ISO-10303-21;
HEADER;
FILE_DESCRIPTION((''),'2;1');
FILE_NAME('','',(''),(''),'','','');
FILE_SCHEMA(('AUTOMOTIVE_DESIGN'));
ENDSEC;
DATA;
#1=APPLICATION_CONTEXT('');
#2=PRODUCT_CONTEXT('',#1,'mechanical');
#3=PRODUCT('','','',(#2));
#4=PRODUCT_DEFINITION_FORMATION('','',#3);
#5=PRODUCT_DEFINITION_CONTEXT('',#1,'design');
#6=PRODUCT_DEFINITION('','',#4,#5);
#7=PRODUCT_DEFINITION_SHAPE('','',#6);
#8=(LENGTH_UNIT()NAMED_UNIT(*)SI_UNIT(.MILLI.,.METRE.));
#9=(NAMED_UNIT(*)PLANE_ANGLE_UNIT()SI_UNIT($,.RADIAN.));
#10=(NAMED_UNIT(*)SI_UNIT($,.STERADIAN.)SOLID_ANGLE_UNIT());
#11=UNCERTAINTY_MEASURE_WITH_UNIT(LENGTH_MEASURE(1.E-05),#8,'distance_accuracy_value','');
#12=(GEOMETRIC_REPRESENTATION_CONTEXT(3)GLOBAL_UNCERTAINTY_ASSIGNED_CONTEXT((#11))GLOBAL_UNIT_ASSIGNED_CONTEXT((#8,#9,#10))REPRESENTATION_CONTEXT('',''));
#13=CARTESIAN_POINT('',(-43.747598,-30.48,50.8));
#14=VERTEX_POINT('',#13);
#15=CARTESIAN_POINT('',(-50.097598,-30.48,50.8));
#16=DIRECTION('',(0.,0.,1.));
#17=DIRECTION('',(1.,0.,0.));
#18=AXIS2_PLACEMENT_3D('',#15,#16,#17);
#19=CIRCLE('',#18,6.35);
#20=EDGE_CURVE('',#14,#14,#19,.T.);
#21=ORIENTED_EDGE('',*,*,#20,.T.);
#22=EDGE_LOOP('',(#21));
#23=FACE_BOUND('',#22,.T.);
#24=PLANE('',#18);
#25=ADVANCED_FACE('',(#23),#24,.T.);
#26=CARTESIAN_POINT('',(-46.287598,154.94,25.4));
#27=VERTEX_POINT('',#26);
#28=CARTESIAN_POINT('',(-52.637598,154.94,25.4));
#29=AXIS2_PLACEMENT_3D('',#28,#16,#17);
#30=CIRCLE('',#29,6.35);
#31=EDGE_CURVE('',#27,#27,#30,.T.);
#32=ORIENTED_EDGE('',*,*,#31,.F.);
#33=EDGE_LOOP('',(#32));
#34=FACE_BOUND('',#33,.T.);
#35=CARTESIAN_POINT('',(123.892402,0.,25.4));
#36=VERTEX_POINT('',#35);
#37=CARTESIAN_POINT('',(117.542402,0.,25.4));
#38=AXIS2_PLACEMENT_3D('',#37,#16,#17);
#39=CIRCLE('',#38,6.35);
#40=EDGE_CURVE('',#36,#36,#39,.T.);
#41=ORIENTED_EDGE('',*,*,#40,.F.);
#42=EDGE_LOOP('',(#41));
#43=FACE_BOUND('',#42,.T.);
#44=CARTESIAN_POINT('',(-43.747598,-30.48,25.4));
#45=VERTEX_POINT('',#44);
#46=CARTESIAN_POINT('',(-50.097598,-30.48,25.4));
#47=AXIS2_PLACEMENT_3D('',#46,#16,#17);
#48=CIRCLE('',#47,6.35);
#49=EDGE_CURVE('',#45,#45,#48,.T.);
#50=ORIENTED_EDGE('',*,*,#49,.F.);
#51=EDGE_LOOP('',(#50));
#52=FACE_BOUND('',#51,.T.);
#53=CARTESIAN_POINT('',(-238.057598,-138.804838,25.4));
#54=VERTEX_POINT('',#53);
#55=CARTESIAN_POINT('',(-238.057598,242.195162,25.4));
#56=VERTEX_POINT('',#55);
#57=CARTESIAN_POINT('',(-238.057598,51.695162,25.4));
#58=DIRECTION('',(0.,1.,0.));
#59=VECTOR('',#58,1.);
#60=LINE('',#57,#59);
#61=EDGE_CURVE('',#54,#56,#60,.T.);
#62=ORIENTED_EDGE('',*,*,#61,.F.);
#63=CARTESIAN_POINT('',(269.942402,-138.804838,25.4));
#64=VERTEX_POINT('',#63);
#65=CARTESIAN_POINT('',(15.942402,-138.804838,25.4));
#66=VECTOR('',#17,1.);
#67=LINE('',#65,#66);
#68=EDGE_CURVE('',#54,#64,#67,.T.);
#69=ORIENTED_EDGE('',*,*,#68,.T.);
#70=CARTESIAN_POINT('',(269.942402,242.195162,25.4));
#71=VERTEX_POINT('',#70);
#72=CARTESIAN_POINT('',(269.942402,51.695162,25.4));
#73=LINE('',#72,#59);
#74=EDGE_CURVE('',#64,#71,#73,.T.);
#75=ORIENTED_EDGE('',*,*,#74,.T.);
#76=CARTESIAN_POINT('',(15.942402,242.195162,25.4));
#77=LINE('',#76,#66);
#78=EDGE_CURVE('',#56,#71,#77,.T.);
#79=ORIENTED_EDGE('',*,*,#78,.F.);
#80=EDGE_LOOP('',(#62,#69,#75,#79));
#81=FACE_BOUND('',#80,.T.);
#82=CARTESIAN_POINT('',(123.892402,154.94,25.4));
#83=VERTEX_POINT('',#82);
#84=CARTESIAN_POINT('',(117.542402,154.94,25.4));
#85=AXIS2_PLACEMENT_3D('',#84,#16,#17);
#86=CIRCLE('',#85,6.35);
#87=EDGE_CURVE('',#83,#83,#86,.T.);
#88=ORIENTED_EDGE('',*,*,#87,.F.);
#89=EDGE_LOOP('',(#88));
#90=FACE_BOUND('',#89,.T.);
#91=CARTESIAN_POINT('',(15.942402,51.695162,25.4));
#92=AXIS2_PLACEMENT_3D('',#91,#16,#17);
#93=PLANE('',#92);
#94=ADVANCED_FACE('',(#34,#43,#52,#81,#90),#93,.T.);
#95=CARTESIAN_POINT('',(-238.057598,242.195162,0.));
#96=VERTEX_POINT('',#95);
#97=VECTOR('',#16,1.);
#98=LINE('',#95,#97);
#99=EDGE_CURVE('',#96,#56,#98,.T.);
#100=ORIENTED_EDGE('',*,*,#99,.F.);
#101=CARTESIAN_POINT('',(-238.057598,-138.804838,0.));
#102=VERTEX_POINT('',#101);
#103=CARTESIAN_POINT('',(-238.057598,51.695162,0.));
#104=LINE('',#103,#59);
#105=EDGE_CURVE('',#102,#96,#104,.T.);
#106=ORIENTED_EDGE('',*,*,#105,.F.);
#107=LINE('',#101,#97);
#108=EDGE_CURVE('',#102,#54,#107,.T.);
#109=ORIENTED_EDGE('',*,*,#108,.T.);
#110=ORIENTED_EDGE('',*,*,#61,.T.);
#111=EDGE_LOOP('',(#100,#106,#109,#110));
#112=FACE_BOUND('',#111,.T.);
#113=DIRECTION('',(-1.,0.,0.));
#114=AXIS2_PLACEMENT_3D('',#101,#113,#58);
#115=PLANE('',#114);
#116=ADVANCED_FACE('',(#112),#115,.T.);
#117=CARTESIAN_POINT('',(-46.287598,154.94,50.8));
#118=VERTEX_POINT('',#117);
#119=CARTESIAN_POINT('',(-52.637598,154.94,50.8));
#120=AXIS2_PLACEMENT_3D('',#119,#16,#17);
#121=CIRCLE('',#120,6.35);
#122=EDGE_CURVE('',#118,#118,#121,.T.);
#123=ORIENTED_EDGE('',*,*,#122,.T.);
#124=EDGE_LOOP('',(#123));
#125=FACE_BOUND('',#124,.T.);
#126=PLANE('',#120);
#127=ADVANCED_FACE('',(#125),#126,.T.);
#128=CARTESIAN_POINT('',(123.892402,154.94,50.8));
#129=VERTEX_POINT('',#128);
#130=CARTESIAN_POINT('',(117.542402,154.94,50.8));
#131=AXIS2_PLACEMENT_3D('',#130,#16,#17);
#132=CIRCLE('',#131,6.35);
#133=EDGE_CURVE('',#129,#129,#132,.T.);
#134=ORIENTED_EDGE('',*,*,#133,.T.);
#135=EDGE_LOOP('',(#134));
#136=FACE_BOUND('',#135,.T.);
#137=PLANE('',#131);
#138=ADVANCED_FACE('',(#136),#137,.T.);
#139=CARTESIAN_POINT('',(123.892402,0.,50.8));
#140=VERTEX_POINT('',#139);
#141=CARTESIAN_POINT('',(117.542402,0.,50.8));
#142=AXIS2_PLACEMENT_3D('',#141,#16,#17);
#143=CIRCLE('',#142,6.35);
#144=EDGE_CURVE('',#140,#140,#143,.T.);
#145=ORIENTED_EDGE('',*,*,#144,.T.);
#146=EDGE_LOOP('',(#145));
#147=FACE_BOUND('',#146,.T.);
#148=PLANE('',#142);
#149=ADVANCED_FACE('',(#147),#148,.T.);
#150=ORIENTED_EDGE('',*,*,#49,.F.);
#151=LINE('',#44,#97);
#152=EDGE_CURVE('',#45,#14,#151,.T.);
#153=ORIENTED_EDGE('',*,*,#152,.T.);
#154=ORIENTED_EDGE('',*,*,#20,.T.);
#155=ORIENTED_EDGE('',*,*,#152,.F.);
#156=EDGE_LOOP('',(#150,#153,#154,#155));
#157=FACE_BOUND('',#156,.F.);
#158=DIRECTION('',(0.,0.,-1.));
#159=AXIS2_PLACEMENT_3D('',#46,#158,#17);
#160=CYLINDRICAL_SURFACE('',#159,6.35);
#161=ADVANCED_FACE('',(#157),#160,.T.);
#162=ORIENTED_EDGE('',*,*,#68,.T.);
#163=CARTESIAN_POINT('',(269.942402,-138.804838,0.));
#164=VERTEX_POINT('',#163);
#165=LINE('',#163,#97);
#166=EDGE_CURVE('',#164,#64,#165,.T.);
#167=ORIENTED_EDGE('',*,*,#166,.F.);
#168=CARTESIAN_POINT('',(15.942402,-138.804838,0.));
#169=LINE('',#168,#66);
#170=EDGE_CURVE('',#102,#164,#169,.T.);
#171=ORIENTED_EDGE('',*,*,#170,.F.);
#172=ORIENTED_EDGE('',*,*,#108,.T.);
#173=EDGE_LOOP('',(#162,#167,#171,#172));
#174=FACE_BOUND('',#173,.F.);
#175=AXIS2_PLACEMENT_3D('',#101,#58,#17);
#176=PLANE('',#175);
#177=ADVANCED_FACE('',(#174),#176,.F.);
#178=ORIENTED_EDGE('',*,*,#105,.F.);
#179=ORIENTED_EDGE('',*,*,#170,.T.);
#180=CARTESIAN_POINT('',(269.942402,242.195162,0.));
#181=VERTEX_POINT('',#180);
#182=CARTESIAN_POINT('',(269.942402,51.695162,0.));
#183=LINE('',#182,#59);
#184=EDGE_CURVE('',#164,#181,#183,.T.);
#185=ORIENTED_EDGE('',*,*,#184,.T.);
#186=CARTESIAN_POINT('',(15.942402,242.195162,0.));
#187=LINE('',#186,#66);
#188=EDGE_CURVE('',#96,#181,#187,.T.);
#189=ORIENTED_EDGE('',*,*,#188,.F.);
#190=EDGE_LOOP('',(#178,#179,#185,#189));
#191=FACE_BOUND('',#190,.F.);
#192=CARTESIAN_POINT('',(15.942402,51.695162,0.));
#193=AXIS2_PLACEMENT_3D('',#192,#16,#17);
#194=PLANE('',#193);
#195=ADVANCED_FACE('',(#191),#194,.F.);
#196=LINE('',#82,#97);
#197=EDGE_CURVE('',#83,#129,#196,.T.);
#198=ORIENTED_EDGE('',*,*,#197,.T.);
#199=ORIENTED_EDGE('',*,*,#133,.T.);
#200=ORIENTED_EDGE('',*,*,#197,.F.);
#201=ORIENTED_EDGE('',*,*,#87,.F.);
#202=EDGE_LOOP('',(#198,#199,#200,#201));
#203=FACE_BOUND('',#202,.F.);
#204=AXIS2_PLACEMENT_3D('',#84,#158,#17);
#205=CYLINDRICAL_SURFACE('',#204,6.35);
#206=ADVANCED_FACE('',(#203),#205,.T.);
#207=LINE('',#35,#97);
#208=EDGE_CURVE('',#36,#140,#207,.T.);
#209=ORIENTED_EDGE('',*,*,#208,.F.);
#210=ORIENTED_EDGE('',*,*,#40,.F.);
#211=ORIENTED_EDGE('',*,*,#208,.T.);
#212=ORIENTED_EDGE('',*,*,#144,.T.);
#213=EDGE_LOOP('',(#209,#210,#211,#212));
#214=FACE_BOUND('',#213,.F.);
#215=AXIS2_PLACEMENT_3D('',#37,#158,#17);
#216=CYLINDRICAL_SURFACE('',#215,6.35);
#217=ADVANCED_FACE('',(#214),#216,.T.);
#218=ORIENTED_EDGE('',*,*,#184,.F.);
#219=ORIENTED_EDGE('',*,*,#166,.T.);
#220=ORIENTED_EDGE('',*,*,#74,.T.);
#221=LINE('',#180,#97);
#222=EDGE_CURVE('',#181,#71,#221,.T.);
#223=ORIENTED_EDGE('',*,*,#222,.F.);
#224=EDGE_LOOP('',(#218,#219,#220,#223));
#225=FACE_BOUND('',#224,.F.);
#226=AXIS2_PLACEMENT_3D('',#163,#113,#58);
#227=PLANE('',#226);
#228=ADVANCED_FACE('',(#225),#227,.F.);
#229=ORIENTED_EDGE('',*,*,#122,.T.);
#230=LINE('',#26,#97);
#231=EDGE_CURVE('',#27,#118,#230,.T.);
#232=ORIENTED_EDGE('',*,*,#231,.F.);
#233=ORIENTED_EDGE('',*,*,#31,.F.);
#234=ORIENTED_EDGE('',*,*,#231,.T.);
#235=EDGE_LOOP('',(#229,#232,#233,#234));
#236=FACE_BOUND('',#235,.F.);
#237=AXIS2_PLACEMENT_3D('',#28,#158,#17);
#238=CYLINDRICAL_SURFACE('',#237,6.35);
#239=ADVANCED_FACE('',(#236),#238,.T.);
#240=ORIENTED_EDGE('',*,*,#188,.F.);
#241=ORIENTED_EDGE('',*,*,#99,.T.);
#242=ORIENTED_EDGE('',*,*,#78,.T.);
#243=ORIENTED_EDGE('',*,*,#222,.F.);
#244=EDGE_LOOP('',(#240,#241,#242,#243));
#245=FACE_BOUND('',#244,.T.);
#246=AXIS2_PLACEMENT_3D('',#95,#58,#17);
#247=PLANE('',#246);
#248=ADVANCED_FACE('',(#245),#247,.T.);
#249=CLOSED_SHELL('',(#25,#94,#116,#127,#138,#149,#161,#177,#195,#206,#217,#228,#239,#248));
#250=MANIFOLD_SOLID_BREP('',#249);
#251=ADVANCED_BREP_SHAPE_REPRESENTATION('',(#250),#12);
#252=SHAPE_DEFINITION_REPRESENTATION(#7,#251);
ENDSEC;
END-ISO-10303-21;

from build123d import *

# Parameters (mm, degrees)
F0_W       = 508
F0_H       = 381
F1_DEPTH   = 25.4
F2_R       = 6.35
F3_DEPTH   = 25.4
F1_FACE1_W = 508
F1_FACE1_H = 381
F4_DEPTH   = 25.4
F5_DEPTH   = 25.4


# Not quite as in the source:
# - a feature names something its author has since deleted; it is built from what else it names


with BuildPart() as f1:
    # F0 (on Top) → F1 (new body)
    with BuildSketch(Plane.XY):
        with Locations((15.942402184, 51.6951617887)):
            Rectangle(F0_W, F0_H)
    extrude(amount=F1_DEPTH)

    # F2 (on face) → F3 (join)
    with BuildSketch(Plane.XY.offset(25.4)):
        with Locations((-52.637597816, 154.94)):
            Circle(F2_R)
        with Locations((117.542402184, 154.94)):
            Circle(F2_R)
        with Locations((117.542402184, 0)):
            Circle(F2_R)
    extrude(amount=F3_DEPTH)

    # F2 (on face) + F1_face1 (on face) → F4 (join)
    with BuildSketch(Plane.XY.offset(25.4)):
        with Locations((-52.637597816, 154.94)):
            Circle(F2_R)
        with Locations((117.542402184, 154.94)):
            Circle(F2_R)
        with Locations((117.542402184, 0)):
            Circle(F2_R)
        with Locations((-50.097597816, -30.48)):
            Circle(F2_R)
    with BuildSketch(Plane(origin=(15.942402184, 51.6951617887, 0), x_dir=(1, 0, 0), z_dir=(0, 0, -1))):
        Rectangle(F1_FACE1_W, F1_FACE1_H)
    extrude(amount=F4_DEPTH, dir=(0, 0, 1))

    # F2 (on face) + F1_face1 (on face) → F5 (join)
    with BuildSketch(Plane.XY.offset(25.4)):
        with Locations((-52.637597816, 154.94)):
            Circle(F2_R)
        with Locations((117.542402184, 154.94)):
            Circle(F2_R)
        with Locations((117.542402184, 0)):
            Circle(F2_R)
        with Locations((-50.097597816, -30.48)):
            Circle(F2_R)
    with BuildSketch(Plane(origin=(15.942402184, 51.6951617887, 0), x_dir=(1, 0, 0), z_dir=(0, 0, -1))):
        Rectangle(F1_FACE1_W, F1_FACE1_H)
    extrude(amount=F5_DEPTH, dir=(0, 0, 1))


solid = f1.part
